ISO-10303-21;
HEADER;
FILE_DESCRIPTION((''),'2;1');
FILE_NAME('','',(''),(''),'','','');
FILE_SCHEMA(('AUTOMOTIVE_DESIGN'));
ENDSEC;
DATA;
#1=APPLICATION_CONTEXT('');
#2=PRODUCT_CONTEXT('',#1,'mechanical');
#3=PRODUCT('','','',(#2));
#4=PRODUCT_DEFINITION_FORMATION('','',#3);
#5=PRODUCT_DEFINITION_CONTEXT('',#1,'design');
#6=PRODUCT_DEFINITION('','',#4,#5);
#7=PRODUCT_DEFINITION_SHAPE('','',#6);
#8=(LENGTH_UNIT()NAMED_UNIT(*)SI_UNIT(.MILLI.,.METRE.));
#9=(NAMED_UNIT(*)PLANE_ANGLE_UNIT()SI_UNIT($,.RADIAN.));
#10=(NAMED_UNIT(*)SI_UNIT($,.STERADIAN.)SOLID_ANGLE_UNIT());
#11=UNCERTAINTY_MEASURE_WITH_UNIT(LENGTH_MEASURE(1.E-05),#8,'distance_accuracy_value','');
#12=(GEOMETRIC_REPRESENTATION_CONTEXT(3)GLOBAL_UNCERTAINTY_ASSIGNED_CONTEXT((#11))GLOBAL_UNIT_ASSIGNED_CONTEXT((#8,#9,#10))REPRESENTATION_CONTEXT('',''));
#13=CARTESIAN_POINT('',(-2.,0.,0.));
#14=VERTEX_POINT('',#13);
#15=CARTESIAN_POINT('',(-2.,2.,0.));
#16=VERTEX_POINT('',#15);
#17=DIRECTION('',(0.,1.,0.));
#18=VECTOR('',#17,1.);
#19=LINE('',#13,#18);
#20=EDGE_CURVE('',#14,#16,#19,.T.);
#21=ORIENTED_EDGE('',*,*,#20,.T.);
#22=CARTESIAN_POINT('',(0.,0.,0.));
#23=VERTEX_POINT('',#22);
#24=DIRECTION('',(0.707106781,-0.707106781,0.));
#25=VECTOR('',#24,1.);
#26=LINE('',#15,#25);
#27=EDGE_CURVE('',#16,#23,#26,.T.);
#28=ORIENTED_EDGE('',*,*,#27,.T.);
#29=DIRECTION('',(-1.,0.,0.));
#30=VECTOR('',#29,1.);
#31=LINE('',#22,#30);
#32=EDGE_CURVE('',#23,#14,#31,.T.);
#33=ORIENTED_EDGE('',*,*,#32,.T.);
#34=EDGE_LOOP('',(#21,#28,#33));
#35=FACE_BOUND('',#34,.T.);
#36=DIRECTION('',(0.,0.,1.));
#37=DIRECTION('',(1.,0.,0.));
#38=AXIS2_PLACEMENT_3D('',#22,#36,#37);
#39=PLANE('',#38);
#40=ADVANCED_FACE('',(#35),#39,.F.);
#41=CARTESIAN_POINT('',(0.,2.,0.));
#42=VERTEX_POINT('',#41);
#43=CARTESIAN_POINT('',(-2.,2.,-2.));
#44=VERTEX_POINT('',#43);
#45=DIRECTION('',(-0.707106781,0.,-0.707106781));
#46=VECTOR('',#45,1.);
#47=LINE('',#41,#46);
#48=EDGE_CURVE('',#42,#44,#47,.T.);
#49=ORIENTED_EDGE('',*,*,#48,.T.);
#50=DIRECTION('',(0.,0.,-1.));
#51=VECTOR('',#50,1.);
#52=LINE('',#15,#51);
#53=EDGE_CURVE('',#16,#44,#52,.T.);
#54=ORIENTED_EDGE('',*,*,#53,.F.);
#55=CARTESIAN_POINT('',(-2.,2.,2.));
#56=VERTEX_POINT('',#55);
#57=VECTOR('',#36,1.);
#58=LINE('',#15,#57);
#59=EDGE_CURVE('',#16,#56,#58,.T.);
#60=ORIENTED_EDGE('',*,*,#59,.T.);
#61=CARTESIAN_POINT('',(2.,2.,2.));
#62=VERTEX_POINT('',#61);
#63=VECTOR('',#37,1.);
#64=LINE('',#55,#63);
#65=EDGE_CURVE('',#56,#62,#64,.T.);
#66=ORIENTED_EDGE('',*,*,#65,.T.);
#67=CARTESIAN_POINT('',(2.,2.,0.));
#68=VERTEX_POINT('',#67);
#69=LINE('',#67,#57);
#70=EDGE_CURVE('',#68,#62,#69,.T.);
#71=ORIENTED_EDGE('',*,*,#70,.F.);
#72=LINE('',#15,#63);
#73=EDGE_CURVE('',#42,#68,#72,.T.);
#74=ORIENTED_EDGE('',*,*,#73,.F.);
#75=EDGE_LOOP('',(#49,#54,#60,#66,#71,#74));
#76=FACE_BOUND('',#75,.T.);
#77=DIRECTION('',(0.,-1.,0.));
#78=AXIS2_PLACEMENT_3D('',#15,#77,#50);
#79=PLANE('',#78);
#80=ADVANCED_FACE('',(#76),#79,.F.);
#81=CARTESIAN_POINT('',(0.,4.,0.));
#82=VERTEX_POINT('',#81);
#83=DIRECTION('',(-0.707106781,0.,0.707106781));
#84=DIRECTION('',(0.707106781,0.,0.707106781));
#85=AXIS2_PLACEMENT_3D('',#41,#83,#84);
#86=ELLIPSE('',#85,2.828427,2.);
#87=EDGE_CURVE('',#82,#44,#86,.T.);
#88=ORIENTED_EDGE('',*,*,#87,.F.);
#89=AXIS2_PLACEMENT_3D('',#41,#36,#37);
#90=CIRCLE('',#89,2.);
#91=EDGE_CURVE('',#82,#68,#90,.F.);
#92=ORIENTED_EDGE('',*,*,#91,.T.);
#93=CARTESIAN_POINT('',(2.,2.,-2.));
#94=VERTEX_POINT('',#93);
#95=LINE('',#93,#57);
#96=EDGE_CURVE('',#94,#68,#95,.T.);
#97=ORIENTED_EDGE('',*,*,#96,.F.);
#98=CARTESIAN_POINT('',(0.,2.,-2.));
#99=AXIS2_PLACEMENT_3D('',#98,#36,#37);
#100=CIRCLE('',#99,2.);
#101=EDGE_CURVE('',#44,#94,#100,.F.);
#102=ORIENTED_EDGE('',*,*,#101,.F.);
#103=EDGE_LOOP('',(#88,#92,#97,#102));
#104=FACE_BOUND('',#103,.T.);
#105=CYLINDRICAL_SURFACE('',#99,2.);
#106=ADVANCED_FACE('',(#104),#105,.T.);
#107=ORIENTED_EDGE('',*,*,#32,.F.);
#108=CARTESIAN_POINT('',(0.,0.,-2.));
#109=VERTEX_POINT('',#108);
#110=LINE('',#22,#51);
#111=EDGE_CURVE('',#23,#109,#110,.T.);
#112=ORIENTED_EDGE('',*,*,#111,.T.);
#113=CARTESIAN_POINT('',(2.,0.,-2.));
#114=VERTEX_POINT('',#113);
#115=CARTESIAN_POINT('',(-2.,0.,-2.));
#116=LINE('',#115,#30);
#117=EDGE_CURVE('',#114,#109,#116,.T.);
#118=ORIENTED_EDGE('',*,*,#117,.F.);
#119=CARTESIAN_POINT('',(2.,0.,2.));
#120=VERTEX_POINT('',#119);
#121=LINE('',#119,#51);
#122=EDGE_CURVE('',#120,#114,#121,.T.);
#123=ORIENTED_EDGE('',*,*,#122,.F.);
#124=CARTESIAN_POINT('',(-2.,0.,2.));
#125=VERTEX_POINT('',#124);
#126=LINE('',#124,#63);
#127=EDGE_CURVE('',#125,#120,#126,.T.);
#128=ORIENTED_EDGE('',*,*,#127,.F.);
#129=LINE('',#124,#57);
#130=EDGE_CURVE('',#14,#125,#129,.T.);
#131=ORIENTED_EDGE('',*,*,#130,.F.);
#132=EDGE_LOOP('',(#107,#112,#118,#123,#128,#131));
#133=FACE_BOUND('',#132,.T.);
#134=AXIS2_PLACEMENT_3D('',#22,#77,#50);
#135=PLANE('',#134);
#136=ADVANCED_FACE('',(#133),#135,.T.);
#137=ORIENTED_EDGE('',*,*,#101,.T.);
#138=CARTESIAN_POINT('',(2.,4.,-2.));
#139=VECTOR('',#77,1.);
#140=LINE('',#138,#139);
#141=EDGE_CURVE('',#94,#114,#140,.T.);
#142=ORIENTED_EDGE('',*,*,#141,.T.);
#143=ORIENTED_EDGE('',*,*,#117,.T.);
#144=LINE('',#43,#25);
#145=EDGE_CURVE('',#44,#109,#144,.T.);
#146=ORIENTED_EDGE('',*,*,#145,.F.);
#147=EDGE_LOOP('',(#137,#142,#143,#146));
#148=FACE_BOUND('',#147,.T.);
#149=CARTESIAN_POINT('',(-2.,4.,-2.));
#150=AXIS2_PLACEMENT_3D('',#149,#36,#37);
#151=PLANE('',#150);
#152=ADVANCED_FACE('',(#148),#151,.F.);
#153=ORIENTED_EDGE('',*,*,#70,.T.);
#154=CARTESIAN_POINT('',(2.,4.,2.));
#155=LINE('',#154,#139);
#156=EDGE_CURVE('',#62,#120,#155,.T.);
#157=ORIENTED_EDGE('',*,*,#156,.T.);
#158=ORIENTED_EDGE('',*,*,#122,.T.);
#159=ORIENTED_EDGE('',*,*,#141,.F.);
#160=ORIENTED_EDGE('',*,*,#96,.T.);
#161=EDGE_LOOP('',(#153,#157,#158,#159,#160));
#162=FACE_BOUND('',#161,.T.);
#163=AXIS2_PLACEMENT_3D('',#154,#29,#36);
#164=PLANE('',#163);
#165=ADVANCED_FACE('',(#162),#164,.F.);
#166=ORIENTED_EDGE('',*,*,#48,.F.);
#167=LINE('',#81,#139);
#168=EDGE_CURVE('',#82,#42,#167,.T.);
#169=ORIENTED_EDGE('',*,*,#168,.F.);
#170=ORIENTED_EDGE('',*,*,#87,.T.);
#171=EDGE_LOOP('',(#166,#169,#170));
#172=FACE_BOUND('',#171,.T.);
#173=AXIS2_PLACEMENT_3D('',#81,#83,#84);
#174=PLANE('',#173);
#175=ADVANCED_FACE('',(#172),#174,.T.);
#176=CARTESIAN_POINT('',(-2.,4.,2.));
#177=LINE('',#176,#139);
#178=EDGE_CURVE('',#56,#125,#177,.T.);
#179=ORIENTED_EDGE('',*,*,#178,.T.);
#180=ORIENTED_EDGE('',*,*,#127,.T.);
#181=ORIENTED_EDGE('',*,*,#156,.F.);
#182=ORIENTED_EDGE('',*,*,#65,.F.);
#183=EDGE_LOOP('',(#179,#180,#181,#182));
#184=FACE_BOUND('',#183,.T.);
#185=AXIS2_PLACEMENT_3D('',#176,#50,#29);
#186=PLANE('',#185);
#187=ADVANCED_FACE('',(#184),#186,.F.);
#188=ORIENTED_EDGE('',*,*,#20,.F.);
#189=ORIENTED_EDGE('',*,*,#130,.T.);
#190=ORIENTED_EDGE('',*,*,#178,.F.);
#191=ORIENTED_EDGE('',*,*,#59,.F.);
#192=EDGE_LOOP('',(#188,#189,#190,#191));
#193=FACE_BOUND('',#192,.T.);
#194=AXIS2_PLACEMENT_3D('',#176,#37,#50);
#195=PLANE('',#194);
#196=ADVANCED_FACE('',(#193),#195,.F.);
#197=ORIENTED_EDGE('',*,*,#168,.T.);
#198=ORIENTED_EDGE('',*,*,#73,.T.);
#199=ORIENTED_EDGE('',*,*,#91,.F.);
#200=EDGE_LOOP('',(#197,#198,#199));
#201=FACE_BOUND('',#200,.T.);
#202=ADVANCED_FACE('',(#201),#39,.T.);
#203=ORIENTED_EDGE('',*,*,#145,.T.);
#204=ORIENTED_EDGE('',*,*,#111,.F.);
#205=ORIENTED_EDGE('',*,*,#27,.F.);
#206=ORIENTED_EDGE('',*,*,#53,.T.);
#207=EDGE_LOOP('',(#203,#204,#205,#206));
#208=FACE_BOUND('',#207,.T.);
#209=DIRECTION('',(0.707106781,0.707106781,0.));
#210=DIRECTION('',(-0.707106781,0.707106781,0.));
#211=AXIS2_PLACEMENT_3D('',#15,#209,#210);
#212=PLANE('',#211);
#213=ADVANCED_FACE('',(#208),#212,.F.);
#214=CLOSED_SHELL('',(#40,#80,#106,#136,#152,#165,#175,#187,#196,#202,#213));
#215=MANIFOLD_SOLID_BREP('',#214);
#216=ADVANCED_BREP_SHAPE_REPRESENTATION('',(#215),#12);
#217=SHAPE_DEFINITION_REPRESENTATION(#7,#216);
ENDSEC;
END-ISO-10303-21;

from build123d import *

# Parameters (mm, degrees)
SKETCH1_W           = 4
SKETCH1_H           = 4
BOSS_EXTRUDE1_DEPTH = 4
SKETCH2_W           = 4
SKETCH2_H           = 2
CUT_EXTRUDE1_DEPTH  = 2
CUT_EXTRUDE2_DEPTH  = 2
CUT_EXTRUDE3_DEPTH  = 2
CUT_EXTRUDE4_DEPTH  = 2


with BuildPart() as part:
    # Sketch1 → Boss-Extrude1 (new body)
    with BuildSketch(Plane(origin=(0, 0, 0), x_dir=(1, 0, 0), z_dir=(0, 1, 0))):
        Rectangle(SKETCH1_W, SKETCH1_H)
    extrude(amount=BOSS_EXTRUDE1_DEPTH)

    # Sketch2 → Cut-Extrude1 (cut)
    with BuildSketch(Plane.XY.offset(2)):
        with Locations((0, 3)):
            Rectangle(SKETCH2_W, SKETCH2_H)
    extrude(amount=-CUT_EXTRUDE1_DEPTH, mode=Mode.SUBTRACT)

    # Sketch3 → Cut-Extrude2 (cut)
    with BuildSketch(Plane(origin=(0, 0, -2), x_dir=(-1, 0, 0), z_dir=(0, 0, -1))):
        Polygon((2, 2), (0, 0), (2, 0), align=None)
    extrude(amount=-CUT_EXTRUDE2_DEPTH, mode=Mode.SUBTRACT)

    # Sketch4 → Cut-Extrude3 (cut)
    with BuildSketch(Plane.XY):
        with BuildLine():
            Line((-2, 4), (-2, 2))
            ThreePointArc((-2, 2), (-1.414213562, 3.414213562), (0, 4))
            Line((0, 4), (-2, 4))
        make_face()
        with BuildLine():
            Line((2, 4), (0, 4))
            ThreePointArc((0, 4), (1.414213562, 3.414213562), (2, 2))
            Line((2, 2), (2, 4))
        make_face()
    extrude(amount=-CUT_EXTRUDE3_DEPTH, mode=Mode.SUBTRACT)

    # Sketch5 → Cut-Extrude4 (cut)
    with BuildSketch(Plane(origin=(0, 2, 0), x_dir=(1, 0, 0), z_dir=(0, 1, 0))):
        Polygon((0, 0), (-2, 2), (-2, 0), align=None)
    extrude(amount=CUT_EXTRUDE4_DEPTH, mode=Mode.SUBTRACT)


solid = part.part
